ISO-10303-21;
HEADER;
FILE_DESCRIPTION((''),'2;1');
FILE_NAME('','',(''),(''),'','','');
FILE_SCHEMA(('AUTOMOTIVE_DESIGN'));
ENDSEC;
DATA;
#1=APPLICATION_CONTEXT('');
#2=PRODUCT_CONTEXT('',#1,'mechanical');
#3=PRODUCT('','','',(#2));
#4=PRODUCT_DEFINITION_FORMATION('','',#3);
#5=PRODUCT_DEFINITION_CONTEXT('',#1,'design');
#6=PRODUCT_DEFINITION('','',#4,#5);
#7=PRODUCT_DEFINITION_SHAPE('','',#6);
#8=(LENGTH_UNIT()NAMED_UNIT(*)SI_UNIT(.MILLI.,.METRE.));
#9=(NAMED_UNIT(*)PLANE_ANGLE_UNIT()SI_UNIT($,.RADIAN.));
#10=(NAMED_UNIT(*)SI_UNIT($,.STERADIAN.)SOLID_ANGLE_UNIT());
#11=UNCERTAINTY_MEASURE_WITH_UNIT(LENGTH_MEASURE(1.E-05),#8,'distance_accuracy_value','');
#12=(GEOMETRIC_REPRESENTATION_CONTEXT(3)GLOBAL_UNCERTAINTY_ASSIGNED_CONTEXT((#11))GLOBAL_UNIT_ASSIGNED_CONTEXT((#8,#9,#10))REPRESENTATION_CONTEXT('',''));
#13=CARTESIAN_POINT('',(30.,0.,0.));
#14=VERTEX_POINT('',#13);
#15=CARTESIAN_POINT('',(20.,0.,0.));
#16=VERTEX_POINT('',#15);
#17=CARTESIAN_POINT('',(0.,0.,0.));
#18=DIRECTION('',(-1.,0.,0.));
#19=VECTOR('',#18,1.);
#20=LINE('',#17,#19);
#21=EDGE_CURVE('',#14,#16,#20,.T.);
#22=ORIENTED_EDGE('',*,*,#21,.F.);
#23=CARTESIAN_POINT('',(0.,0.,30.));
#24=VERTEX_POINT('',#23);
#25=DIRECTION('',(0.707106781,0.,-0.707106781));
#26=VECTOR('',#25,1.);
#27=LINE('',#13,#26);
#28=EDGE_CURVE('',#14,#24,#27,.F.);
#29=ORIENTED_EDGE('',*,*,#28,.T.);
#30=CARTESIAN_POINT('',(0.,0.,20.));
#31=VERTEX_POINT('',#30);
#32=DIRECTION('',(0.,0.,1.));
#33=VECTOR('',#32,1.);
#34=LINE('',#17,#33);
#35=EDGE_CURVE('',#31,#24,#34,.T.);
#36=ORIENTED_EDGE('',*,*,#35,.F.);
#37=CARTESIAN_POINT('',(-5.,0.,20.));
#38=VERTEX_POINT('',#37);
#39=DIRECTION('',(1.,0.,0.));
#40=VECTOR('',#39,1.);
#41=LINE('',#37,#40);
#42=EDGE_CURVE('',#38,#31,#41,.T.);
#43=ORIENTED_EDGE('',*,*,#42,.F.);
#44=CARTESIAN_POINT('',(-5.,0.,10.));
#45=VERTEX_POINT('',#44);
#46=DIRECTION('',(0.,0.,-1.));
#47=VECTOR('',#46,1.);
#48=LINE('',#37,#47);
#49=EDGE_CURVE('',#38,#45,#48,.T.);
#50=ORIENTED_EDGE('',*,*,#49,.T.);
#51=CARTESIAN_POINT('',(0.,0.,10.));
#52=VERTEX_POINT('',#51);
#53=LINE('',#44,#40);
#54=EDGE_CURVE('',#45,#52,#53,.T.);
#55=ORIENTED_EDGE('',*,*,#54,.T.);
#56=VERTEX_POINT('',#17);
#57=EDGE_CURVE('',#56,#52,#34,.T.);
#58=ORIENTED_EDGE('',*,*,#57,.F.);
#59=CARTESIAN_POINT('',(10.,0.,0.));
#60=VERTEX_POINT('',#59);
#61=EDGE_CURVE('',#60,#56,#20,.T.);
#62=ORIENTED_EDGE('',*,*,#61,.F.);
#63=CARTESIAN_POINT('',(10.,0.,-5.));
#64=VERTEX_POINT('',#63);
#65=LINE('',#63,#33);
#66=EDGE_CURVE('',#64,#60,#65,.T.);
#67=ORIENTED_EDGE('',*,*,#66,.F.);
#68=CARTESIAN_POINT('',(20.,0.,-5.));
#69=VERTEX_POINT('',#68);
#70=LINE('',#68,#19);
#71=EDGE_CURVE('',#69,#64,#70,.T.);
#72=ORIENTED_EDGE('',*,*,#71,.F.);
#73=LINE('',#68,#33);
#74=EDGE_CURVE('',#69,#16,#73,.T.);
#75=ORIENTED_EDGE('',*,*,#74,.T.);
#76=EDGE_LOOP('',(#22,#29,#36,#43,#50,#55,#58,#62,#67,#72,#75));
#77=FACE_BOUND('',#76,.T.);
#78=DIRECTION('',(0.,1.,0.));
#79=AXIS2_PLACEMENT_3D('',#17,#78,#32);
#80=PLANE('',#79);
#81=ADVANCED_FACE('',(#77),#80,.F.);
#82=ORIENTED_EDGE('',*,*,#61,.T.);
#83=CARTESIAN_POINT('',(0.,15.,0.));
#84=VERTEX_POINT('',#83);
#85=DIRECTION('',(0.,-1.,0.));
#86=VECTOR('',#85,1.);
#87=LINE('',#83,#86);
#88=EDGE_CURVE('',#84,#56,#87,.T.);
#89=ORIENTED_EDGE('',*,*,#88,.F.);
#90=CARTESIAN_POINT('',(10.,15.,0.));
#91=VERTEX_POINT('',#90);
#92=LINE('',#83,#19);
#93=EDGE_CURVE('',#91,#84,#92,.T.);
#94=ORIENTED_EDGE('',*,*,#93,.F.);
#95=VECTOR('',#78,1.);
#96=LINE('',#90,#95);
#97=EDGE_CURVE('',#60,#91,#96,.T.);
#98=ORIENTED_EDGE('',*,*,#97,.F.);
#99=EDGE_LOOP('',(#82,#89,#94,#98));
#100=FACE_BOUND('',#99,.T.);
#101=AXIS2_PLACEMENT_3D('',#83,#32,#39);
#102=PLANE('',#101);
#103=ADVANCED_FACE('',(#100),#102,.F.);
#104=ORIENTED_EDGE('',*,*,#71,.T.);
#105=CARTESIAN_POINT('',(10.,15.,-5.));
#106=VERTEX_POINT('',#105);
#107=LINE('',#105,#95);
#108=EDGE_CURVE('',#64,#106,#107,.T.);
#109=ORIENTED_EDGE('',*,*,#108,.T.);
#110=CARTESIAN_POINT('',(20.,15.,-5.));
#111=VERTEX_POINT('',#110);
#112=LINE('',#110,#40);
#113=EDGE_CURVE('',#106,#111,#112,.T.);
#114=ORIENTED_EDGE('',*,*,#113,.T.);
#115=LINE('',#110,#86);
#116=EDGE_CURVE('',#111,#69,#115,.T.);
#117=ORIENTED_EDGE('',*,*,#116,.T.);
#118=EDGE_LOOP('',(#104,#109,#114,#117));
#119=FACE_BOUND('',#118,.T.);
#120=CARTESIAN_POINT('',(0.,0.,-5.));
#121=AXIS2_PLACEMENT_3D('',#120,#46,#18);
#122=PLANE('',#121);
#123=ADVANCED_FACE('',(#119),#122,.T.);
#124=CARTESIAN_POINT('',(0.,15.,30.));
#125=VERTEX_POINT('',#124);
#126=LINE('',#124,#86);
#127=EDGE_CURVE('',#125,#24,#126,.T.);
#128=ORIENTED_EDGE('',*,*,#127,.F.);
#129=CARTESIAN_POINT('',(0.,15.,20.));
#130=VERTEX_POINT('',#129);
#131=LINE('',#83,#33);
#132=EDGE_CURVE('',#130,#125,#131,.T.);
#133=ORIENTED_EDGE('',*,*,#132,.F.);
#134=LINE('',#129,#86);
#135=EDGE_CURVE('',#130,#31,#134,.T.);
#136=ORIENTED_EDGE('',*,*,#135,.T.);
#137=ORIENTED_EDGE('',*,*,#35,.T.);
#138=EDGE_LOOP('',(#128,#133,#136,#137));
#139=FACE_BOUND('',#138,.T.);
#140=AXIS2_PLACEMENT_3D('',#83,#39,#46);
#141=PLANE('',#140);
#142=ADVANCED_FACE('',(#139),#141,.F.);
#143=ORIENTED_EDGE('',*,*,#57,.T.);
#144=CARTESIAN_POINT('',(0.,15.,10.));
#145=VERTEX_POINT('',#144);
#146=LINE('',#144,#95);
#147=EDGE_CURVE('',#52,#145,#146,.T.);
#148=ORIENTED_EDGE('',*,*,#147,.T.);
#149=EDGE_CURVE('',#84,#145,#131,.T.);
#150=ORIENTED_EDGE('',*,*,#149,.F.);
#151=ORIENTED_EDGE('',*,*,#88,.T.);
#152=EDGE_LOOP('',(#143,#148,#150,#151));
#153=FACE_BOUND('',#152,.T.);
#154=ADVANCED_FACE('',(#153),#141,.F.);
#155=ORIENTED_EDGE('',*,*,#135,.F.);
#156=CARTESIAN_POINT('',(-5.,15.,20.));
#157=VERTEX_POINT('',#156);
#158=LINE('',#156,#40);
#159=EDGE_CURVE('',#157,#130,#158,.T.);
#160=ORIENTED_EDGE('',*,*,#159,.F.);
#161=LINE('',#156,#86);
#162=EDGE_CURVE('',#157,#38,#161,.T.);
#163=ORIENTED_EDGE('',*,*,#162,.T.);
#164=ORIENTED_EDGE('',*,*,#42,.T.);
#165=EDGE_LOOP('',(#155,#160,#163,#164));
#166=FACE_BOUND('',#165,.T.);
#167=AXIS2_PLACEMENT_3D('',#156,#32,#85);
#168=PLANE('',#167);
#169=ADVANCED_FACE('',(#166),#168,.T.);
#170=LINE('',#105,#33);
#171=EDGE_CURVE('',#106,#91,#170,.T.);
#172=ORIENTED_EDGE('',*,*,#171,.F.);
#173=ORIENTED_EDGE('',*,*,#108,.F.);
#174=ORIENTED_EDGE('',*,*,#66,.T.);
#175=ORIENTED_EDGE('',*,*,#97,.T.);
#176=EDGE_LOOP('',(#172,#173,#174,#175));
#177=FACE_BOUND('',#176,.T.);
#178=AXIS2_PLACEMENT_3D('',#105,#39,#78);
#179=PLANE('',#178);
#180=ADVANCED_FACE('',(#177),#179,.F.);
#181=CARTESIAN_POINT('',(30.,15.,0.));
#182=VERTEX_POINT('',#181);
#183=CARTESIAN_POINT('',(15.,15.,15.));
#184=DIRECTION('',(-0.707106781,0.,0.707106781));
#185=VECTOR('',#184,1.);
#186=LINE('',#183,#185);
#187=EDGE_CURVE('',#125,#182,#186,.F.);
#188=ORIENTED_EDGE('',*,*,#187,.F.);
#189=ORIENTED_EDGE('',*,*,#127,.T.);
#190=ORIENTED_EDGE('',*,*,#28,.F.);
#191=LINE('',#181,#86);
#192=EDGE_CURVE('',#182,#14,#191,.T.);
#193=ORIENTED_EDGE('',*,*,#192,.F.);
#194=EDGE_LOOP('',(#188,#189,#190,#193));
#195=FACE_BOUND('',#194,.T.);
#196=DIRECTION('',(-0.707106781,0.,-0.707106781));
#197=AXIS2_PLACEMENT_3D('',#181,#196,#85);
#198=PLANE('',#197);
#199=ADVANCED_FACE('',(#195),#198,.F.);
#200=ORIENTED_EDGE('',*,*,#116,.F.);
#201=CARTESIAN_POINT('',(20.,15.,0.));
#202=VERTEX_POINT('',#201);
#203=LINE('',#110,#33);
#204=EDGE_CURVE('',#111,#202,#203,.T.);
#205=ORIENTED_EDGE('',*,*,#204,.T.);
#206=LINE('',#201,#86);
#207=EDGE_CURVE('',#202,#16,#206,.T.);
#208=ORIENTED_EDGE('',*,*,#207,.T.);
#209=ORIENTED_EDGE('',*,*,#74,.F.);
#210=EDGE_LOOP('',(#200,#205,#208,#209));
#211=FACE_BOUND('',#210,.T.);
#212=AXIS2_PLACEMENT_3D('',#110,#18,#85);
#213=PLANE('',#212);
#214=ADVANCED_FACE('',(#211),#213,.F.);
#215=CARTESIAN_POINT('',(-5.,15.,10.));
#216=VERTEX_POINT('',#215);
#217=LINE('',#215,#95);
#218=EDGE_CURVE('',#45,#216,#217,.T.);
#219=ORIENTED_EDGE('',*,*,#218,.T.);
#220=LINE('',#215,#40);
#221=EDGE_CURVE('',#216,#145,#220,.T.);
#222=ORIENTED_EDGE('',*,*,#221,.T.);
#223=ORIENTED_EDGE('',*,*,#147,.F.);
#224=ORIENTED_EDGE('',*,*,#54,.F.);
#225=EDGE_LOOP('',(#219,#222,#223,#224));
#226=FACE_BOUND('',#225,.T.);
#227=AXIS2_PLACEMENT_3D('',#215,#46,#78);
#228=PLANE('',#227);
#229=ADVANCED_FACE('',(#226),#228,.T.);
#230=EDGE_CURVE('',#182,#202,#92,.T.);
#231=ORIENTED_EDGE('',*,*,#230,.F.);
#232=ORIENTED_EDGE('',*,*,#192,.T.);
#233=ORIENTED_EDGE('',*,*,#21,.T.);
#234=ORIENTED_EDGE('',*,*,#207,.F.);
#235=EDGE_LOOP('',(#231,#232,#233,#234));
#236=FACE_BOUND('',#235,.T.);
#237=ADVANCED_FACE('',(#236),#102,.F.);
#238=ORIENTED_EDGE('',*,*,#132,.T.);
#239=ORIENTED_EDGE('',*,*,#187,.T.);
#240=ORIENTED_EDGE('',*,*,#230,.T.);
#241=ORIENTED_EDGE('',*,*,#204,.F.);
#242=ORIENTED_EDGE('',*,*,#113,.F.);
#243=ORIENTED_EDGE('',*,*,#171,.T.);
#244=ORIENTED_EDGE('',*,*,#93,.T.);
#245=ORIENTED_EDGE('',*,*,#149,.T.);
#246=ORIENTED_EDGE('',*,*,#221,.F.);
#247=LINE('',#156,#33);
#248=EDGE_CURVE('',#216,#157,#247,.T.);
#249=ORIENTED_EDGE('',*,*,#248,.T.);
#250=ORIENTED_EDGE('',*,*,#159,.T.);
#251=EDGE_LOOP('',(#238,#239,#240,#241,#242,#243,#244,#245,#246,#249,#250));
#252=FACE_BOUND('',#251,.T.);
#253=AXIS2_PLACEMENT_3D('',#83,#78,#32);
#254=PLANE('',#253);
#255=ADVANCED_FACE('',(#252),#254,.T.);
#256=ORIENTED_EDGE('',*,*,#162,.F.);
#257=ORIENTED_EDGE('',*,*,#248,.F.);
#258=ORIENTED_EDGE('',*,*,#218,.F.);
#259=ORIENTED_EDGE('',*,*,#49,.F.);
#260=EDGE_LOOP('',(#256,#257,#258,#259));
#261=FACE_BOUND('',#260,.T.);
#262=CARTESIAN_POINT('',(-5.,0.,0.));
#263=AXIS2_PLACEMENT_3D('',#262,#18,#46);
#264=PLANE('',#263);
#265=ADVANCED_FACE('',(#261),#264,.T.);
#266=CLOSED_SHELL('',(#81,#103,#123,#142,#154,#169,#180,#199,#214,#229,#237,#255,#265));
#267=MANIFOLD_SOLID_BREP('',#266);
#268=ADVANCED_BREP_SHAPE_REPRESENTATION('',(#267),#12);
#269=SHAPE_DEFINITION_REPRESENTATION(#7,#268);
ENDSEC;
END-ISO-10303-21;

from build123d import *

# Parameters (mm, degrees)
ESQUISSE1_W        = 30
ESQUISSE1_H        = 30
BOSS_EXTRU_1_DEPTH = 15
ESQUISSE3_W        = 10
ESQUISSE3_H        = 15
BOSS_EXTRU_2_DEPTH = 5
CHANFREIN1_SIZE    = 30


with BuildPart() as part:
    # Esquisse1 → Boss.-Extru.1 (new body)
    with BuildSketch(Plane(origin=(0, 0, 0), x_dir=(1, 0, 0), z_dir=(0, 1, 0))):
        with Locations((15, -15)):
            Rectangle(ESQUISSE1_W, ESQUISSE1_H)
    extrude(amount=BOSS_EXTRU_1_DEPTH)

    # Esquisse3 → Boss.-Extru.2 (add)
    with BuildSketch(Plane(origin=(0, 0, 0), x_dir=(-1, 0, 0), z_dir=(0, 0, -1))):
        with Locations((-15, 7.5)):
            Rectangle(ESQUISSE3_W, ESQUISSE3_H)
    boss_extru_2 = extrude(amount=BOSS_EXTRU_2_DEPTH)

    # Symétrie1: Boss.-Extru.2 across plane
    add(boss_extru_2.mirror(Plane(origin=(0, 0, 0), x_dir=(0.7071067811865476, 0, 0.7071067811865475), z_dir=(0.7071067811865475, 0, -0.7071067811865476))))

    # Chanfrein1
    chanfrein1_edges = [part.edges().sort_by_distance(p)[0] for p in [
        (30, 7.5, 30),
    ]]
    chamfer(chanfrein1_edges, length=CHANFREIN1_SIZE - 0.0001)  # a hair under: the kernel refuses the full size


solid = part.part
